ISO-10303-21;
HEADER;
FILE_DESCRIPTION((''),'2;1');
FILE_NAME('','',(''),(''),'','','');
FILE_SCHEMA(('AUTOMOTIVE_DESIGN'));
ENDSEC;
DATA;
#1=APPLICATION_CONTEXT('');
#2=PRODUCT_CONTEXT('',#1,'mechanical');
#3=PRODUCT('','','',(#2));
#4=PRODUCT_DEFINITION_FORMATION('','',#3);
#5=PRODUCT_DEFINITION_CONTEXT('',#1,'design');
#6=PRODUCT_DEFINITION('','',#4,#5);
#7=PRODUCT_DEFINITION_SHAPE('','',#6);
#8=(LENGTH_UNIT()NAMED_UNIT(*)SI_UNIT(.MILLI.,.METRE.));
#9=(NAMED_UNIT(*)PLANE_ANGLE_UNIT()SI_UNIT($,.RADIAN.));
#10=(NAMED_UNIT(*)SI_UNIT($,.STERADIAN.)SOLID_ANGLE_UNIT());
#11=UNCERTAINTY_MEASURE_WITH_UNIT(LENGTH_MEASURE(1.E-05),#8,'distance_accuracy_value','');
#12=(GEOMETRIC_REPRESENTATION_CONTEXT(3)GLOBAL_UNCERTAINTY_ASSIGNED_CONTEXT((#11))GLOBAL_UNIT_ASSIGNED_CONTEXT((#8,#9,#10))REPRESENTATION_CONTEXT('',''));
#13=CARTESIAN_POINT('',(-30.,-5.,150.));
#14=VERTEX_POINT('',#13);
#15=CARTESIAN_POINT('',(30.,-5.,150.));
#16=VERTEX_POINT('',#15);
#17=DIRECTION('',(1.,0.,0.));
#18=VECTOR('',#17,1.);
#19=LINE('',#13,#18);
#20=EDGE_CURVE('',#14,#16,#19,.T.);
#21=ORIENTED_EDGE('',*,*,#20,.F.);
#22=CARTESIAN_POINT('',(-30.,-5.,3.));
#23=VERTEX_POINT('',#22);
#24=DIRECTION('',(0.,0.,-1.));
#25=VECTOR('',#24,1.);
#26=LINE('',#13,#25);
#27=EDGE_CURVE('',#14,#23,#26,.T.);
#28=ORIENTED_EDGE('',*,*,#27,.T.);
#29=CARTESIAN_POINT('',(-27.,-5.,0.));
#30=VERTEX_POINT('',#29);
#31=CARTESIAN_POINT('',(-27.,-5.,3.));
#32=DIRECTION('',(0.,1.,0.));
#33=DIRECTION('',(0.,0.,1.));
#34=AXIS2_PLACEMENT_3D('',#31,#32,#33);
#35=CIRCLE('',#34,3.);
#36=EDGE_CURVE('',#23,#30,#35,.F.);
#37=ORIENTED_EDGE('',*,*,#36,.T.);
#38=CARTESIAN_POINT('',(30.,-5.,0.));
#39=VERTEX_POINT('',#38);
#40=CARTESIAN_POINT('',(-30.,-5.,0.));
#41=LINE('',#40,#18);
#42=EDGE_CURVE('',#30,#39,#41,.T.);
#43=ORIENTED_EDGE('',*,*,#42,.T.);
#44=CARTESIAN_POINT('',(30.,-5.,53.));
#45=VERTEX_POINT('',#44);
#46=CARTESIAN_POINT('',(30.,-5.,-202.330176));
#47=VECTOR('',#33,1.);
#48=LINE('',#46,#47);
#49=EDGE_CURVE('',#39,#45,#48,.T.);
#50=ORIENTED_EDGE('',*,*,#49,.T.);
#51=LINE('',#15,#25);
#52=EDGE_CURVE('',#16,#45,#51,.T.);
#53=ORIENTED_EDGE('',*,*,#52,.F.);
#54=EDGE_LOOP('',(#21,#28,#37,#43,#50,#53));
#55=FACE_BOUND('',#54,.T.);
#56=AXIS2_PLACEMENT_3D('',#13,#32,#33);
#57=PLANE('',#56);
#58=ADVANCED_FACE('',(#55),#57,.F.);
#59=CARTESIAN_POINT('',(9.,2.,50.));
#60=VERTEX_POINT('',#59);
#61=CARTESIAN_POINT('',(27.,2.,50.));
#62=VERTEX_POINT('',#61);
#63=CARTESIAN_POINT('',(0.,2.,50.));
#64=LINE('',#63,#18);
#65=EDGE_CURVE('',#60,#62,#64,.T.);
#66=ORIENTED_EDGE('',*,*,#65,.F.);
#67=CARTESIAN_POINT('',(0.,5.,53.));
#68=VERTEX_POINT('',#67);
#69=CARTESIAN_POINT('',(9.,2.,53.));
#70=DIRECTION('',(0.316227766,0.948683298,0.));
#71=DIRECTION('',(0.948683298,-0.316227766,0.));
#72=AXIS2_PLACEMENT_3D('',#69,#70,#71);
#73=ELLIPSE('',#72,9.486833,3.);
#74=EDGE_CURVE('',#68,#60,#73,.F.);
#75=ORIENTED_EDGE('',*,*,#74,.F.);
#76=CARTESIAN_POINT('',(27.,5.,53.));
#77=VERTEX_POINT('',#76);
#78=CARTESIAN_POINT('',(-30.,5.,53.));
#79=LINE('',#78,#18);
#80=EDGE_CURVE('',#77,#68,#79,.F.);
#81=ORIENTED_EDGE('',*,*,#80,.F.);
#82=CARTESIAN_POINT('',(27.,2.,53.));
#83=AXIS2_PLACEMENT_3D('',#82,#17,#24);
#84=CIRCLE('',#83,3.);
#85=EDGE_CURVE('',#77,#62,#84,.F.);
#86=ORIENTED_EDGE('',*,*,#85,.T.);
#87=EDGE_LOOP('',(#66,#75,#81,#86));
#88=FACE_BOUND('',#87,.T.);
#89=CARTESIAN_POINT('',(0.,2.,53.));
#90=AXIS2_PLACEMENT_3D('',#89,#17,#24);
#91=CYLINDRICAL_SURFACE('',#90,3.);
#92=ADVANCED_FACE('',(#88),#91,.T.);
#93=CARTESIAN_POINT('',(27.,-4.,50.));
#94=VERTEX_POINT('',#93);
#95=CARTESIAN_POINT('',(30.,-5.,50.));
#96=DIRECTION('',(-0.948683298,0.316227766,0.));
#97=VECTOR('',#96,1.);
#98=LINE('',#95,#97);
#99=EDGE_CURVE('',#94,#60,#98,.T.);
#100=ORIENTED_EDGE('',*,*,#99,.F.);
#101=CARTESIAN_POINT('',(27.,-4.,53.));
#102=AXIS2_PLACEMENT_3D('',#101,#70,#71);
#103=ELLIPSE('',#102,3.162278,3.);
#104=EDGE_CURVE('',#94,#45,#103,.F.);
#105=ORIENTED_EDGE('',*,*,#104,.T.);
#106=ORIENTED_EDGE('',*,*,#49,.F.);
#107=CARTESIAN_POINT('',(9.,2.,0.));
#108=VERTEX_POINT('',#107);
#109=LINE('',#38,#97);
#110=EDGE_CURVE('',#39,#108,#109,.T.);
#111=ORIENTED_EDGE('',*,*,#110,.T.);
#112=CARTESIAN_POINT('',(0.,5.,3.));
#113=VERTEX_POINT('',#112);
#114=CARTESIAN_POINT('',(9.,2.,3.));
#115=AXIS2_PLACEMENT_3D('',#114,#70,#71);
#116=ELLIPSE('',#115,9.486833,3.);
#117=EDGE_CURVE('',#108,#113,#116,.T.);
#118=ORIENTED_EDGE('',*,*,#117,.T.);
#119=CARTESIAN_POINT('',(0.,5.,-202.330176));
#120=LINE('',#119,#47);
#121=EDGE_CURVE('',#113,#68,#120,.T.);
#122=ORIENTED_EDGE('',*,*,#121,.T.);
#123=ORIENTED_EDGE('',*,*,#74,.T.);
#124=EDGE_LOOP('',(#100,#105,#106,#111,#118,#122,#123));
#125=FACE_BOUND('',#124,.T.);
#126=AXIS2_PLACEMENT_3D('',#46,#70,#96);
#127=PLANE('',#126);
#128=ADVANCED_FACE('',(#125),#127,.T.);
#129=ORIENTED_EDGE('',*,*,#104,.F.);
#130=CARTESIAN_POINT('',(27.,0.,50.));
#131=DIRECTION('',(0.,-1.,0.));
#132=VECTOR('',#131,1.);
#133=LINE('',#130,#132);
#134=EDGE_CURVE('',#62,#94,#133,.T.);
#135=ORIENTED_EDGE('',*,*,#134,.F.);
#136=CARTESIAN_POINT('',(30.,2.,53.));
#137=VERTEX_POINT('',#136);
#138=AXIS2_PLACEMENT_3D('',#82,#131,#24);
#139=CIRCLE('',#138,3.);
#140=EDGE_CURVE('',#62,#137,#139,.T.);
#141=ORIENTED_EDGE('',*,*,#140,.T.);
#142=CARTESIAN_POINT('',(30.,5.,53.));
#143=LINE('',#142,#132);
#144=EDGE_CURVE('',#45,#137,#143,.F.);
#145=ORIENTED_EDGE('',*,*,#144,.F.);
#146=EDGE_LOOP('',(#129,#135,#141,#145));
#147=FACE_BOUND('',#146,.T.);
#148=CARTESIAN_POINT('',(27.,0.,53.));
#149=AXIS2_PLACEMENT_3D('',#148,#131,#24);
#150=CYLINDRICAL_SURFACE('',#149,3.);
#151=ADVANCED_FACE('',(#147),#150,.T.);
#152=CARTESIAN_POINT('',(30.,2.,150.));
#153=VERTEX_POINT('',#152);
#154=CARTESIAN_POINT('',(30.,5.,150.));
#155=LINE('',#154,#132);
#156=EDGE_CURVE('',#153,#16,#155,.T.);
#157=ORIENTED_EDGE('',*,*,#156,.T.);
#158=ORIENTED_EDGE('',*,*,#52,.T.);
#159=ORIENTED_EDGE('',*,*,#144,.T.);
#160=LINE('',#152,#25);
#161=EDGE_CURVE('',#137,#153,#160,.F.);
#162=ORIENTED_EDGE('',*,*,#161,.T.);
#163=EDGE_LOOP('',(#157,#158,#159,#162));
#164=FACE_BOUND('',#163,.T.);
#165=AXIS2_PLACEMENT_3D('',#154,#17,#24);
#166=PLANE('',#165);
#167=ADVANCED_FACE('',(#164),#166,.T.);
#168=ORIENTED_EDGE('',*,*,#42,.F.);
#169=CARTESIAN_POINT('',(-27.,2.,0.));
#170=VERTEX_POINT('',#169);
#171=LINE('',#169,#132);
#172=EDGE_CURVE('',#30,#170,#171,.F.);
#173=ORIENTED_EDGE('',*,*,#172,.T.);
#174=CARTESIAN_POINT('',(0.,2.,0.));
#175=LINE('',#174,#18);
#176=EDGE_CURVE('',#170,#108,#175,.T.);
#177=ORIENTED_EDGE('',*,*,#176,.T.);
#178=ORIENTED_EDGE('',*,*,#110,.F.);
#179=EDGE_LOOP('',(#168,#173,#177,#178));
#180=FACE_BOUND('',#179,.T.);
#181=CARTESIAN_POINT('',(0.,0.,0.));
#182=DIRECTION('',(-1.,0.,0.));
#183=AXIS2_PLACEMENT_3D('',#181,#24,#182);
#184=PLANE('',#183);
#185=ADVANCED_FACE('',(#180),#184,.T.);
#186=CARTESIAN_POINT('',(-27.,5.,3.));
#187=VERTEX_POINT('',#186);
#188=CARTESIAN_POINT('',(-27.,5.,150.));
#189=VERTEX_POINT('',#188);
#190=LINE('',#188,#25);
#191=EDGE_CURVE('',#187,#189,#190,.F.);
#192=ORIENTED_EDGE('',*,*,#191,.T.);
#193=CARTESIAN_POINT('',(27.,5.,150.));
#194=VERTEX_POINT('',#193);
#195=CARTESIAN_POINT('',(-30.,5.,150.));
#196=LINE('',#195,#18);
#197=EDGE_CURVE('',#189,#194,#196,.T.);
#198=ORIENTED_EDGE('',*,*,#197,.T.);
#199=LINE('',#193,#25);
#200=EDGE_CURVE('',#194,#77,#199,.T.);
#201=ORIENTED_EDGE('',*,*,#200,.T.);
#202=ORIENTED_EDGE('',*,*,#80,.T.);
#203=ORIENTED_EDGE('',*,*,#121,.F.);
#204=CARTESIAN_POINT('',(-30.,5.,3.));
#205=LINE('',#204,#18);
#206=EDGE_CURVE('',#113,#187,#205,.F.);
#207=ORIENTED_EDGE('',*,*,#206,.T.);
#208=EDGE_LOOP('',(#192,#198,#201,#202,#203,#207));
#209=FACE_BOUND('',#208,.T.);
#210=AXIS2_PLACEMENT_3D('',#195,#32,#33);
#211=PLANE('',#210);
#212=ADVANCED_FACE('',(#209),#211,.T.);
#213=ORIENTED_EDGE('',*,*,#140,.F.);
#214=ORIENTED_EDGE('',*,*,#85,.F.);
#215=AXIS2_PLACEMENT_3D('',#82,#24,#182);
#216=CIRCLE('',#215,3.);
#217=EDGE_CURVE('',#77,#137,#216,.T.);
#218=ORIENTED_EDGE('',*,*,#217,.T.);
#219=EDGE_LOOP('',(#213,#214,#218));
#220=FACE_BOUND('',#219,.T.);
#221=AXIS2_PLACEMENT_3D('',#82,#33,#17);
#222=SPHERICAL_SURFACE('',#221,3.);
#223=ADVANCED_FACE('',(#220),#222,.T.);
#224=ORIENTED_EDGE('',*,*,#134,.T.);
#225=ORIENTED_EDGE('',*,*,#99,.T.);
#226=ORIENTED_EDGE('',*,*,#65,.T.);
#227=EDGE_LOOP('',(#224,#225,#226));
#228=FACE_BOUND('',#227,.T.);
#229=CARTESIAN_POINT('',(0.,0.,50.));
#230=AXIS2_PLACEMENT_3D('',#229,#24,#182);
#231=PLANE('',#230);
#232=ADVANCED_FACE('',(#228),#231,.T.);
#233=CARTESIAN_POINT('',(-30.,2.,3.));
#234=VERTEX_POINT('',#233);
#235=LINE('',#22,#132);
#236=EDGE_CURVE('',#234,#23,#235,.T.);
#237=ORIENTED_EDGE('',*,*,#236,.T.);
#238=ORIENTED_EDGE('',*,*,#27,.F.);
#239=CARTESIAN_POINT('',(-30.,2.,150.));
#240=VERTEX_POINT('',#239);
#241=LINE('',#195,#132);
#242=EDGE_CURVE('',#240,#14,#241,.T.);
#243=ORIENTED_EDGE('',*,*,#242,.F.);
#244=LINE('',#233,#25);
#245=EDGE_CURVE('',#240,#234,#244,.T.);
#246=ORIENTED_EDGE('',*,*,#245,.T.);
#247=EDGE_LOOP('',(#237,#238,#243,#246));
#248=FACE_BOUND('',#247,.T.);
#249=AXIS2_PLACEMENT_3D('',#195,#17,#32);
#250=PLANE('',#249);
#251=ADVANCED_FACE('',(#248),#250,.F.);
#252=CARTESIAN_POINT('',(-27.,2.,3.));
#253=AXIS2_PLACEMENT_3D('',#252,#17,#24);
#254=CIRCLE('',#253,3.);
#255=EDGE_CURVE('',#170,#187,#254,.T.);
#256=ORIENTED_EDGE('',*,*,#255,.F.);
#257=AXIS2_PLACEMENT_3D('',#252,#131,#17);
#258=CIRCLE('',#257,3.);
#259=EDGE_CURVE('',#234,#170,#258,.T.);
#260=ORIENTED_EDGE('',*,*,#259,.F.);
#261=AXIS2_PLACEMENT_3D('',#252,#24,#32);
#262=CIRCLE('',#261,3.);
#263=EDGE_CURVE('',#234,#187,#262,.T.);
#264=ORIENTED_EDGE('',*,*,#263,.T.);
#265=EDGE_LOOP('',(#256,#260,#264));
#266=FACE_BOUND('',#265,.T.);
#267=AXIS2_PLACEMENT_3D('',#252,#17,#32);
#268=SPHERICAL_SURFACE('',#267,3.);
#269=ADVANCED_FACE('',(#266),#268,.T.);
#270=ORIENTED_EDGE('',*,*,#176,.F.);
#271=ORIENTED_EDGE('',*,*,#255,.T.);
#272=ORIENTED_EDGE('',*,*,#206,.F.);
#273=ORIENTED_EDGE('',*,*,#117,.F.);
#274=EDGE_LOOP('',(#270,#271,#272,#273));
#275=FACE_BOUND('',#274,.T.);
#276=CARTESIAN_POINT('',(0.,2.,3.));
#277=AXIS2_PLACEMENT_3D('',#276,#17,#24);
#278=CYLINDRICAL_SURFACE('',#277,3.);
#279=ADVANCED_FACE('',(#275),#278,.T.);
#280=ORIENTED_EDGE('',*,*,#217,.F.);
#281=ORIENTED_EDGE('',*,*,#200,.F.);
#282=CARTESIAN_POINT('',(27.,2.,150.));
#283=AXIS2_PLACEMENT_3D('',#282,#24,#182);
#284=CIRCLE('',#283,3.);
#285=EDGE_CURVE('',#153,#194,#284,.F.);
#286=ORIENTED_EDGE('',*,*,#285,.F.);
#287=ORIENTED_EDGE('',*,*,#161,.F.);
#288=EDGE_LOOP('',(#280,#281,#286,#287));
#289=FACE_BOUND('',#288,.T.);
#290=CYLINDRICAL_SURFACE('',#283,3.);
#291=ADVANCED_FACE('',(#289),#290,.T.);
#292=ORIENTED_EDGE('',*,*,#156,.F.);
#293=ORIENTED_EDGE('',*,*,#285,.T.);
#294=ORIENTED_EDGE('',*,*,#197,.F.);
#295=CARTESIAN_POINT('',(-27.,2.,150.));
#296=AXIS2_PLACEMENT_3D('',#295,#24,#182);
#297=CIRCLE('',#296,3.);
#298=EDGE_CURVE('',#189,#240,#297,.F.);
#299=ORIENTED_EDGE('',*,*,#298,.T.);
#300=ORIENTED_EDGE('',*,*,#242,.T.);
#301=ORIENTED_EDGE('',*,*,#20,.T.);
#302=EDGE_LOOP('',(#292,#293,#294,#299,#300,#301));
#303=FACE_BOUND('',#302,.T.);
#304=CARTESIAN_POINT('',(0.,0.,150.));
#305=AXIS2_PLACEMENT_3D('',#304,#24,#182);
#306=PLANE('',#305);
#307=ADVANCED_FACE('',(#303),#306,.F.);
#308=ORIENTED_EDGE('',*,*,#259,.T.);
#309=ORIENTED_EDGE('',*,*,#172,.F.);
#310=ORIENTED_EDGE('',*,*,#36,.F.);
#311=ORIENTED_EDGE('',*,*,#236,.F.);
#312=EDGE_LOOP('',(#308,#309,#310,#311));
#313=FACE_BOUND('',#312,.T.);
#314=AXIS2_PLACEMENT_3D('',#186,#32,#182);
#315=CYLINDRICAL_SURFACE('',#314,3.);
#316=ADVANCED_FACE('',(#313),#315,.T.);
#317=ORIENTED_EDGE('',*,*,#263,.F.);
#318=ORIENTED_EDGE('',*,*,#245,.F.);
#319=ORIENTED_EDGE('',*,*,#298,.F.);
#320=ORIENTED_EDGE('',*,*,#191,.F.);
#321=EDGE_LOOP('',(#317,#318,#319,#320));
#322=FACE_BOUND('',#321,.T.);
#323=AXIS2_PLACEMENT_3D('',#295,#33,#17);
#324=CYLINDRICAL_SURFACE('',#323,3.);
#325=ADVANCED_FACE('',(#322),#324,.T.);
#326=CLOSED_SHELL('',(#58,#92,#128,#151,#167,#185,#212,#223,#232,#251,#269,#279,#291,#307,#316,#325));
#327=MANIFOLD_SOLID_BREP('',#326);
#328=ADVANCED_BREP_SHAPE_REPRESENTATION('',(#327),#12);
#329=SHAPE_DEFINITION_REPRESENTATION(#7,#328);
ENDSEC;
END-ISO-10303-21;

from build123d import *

# Parameters (mm, degrees)
SKETCH1_W               = 60
SKETCH1_H               = 10
BOSS_EXTRUDE1_DEPTH     = 150
CUT_EXTRUDE3_DEPTH      = 154.05227865
CUT_EXTRUDE3_DEPTH_BACK = 50
FILLET5_R               = 3
FILLET6_R               = 3
FILLET7_R               = 3


with BuildPart() as part:
    # Sketch1 → Boss-Extrude1 (new body)
    with BuildSketch(Plane.XY):
        Rectangle(SKETCH1_W, SKETCH1_H)
    extrude(amount=BOSS_EXTRUDE1_DEPTH)

    # Sketch2 → Cut-Extrude3 (cut, two sides: drawn at the far end of the back side and taken through both)
    with BuildSketch(Plane(origin=(0, 0, 0), x_dir=(-1, 0, 0), z_dir=(0, 0, -1)).offset(-CUT_EXTRUDE3_DEPTH_BACK)):
        Polygon((-30, 5), (-30, -5), (0, 5), align=None)
    extrude(amount=CUT_EXTRUDE3_DEPTH + CUT_EXTRUDE3_DEPTH_BACK, mode=Mode.SUBTRACT)

    # Fillet5
    fillet5_edges = [part.edges().sort_by_distance(p)[0] for p in [
        (15, 5, 50),
        (30, 0, 50),
        (-15, 5, 0),
    ]]
    fillet(fillet5_edges, radius=FILLET5_R)

    # Fillet6
    fillet6_edges = [part.edges().sort_by_distance(p)[0] for p in [
        (-30, -1.5, 0),
        (-30, 4.121320344, 0.878679656),
        (-30, 5, 76.5),
    ]]
    fillet(fillet6_edges, radius=FILLET6_R)

    # Fillet7
    # the kernel refuses this fillet: 3 mm, written as the material it takes off along each edge
    with BuildSketch(Plane(origin=(27, 2, 53), x_dir=(1, 0, 0), z_dir=(0, 1, 0))) as fillet7_piece_1_section:
        Polygon((0, 0), (FILLET7_R, 0), (FILLET7_R, FILLET7_R), (0, FILLET7_R), align=None)
    fillet7_piece_1 = extrude(amount=FILLET7_R, mode=Mode.PRIVATE)
    fillet7_piece_1 = fillet7_piece_1 - Plane(origin=(27, 2, 53), x_dir=(-0.7071067811865475, 0, 0.7071067811865475), z_dir=(0, 1, 0)) * Sphere(FILLET7_R, mode=Mode.PRIVATE)
    add(fillet7_piece_1, mode=Mode.SUBTRACT)
    with BuildSketch(Plane(origin=(30, 5, 53), x_dir=(-1, 0, 0), z_dir=(0, 0, 1))) as fillet7_piece_2:
        with BuildLine():
            CenterArc((FILLET7_R, FILLET7_R), FILLET7_R, 180, 90)
            Line((0, FILLET7_R), (0, 0))
            Line((0, 0), (FILLET7_R, 0))
        make_face()
    extrude(amount=104.5, mode=Mode.SUBTRACT)


solid = part.part
